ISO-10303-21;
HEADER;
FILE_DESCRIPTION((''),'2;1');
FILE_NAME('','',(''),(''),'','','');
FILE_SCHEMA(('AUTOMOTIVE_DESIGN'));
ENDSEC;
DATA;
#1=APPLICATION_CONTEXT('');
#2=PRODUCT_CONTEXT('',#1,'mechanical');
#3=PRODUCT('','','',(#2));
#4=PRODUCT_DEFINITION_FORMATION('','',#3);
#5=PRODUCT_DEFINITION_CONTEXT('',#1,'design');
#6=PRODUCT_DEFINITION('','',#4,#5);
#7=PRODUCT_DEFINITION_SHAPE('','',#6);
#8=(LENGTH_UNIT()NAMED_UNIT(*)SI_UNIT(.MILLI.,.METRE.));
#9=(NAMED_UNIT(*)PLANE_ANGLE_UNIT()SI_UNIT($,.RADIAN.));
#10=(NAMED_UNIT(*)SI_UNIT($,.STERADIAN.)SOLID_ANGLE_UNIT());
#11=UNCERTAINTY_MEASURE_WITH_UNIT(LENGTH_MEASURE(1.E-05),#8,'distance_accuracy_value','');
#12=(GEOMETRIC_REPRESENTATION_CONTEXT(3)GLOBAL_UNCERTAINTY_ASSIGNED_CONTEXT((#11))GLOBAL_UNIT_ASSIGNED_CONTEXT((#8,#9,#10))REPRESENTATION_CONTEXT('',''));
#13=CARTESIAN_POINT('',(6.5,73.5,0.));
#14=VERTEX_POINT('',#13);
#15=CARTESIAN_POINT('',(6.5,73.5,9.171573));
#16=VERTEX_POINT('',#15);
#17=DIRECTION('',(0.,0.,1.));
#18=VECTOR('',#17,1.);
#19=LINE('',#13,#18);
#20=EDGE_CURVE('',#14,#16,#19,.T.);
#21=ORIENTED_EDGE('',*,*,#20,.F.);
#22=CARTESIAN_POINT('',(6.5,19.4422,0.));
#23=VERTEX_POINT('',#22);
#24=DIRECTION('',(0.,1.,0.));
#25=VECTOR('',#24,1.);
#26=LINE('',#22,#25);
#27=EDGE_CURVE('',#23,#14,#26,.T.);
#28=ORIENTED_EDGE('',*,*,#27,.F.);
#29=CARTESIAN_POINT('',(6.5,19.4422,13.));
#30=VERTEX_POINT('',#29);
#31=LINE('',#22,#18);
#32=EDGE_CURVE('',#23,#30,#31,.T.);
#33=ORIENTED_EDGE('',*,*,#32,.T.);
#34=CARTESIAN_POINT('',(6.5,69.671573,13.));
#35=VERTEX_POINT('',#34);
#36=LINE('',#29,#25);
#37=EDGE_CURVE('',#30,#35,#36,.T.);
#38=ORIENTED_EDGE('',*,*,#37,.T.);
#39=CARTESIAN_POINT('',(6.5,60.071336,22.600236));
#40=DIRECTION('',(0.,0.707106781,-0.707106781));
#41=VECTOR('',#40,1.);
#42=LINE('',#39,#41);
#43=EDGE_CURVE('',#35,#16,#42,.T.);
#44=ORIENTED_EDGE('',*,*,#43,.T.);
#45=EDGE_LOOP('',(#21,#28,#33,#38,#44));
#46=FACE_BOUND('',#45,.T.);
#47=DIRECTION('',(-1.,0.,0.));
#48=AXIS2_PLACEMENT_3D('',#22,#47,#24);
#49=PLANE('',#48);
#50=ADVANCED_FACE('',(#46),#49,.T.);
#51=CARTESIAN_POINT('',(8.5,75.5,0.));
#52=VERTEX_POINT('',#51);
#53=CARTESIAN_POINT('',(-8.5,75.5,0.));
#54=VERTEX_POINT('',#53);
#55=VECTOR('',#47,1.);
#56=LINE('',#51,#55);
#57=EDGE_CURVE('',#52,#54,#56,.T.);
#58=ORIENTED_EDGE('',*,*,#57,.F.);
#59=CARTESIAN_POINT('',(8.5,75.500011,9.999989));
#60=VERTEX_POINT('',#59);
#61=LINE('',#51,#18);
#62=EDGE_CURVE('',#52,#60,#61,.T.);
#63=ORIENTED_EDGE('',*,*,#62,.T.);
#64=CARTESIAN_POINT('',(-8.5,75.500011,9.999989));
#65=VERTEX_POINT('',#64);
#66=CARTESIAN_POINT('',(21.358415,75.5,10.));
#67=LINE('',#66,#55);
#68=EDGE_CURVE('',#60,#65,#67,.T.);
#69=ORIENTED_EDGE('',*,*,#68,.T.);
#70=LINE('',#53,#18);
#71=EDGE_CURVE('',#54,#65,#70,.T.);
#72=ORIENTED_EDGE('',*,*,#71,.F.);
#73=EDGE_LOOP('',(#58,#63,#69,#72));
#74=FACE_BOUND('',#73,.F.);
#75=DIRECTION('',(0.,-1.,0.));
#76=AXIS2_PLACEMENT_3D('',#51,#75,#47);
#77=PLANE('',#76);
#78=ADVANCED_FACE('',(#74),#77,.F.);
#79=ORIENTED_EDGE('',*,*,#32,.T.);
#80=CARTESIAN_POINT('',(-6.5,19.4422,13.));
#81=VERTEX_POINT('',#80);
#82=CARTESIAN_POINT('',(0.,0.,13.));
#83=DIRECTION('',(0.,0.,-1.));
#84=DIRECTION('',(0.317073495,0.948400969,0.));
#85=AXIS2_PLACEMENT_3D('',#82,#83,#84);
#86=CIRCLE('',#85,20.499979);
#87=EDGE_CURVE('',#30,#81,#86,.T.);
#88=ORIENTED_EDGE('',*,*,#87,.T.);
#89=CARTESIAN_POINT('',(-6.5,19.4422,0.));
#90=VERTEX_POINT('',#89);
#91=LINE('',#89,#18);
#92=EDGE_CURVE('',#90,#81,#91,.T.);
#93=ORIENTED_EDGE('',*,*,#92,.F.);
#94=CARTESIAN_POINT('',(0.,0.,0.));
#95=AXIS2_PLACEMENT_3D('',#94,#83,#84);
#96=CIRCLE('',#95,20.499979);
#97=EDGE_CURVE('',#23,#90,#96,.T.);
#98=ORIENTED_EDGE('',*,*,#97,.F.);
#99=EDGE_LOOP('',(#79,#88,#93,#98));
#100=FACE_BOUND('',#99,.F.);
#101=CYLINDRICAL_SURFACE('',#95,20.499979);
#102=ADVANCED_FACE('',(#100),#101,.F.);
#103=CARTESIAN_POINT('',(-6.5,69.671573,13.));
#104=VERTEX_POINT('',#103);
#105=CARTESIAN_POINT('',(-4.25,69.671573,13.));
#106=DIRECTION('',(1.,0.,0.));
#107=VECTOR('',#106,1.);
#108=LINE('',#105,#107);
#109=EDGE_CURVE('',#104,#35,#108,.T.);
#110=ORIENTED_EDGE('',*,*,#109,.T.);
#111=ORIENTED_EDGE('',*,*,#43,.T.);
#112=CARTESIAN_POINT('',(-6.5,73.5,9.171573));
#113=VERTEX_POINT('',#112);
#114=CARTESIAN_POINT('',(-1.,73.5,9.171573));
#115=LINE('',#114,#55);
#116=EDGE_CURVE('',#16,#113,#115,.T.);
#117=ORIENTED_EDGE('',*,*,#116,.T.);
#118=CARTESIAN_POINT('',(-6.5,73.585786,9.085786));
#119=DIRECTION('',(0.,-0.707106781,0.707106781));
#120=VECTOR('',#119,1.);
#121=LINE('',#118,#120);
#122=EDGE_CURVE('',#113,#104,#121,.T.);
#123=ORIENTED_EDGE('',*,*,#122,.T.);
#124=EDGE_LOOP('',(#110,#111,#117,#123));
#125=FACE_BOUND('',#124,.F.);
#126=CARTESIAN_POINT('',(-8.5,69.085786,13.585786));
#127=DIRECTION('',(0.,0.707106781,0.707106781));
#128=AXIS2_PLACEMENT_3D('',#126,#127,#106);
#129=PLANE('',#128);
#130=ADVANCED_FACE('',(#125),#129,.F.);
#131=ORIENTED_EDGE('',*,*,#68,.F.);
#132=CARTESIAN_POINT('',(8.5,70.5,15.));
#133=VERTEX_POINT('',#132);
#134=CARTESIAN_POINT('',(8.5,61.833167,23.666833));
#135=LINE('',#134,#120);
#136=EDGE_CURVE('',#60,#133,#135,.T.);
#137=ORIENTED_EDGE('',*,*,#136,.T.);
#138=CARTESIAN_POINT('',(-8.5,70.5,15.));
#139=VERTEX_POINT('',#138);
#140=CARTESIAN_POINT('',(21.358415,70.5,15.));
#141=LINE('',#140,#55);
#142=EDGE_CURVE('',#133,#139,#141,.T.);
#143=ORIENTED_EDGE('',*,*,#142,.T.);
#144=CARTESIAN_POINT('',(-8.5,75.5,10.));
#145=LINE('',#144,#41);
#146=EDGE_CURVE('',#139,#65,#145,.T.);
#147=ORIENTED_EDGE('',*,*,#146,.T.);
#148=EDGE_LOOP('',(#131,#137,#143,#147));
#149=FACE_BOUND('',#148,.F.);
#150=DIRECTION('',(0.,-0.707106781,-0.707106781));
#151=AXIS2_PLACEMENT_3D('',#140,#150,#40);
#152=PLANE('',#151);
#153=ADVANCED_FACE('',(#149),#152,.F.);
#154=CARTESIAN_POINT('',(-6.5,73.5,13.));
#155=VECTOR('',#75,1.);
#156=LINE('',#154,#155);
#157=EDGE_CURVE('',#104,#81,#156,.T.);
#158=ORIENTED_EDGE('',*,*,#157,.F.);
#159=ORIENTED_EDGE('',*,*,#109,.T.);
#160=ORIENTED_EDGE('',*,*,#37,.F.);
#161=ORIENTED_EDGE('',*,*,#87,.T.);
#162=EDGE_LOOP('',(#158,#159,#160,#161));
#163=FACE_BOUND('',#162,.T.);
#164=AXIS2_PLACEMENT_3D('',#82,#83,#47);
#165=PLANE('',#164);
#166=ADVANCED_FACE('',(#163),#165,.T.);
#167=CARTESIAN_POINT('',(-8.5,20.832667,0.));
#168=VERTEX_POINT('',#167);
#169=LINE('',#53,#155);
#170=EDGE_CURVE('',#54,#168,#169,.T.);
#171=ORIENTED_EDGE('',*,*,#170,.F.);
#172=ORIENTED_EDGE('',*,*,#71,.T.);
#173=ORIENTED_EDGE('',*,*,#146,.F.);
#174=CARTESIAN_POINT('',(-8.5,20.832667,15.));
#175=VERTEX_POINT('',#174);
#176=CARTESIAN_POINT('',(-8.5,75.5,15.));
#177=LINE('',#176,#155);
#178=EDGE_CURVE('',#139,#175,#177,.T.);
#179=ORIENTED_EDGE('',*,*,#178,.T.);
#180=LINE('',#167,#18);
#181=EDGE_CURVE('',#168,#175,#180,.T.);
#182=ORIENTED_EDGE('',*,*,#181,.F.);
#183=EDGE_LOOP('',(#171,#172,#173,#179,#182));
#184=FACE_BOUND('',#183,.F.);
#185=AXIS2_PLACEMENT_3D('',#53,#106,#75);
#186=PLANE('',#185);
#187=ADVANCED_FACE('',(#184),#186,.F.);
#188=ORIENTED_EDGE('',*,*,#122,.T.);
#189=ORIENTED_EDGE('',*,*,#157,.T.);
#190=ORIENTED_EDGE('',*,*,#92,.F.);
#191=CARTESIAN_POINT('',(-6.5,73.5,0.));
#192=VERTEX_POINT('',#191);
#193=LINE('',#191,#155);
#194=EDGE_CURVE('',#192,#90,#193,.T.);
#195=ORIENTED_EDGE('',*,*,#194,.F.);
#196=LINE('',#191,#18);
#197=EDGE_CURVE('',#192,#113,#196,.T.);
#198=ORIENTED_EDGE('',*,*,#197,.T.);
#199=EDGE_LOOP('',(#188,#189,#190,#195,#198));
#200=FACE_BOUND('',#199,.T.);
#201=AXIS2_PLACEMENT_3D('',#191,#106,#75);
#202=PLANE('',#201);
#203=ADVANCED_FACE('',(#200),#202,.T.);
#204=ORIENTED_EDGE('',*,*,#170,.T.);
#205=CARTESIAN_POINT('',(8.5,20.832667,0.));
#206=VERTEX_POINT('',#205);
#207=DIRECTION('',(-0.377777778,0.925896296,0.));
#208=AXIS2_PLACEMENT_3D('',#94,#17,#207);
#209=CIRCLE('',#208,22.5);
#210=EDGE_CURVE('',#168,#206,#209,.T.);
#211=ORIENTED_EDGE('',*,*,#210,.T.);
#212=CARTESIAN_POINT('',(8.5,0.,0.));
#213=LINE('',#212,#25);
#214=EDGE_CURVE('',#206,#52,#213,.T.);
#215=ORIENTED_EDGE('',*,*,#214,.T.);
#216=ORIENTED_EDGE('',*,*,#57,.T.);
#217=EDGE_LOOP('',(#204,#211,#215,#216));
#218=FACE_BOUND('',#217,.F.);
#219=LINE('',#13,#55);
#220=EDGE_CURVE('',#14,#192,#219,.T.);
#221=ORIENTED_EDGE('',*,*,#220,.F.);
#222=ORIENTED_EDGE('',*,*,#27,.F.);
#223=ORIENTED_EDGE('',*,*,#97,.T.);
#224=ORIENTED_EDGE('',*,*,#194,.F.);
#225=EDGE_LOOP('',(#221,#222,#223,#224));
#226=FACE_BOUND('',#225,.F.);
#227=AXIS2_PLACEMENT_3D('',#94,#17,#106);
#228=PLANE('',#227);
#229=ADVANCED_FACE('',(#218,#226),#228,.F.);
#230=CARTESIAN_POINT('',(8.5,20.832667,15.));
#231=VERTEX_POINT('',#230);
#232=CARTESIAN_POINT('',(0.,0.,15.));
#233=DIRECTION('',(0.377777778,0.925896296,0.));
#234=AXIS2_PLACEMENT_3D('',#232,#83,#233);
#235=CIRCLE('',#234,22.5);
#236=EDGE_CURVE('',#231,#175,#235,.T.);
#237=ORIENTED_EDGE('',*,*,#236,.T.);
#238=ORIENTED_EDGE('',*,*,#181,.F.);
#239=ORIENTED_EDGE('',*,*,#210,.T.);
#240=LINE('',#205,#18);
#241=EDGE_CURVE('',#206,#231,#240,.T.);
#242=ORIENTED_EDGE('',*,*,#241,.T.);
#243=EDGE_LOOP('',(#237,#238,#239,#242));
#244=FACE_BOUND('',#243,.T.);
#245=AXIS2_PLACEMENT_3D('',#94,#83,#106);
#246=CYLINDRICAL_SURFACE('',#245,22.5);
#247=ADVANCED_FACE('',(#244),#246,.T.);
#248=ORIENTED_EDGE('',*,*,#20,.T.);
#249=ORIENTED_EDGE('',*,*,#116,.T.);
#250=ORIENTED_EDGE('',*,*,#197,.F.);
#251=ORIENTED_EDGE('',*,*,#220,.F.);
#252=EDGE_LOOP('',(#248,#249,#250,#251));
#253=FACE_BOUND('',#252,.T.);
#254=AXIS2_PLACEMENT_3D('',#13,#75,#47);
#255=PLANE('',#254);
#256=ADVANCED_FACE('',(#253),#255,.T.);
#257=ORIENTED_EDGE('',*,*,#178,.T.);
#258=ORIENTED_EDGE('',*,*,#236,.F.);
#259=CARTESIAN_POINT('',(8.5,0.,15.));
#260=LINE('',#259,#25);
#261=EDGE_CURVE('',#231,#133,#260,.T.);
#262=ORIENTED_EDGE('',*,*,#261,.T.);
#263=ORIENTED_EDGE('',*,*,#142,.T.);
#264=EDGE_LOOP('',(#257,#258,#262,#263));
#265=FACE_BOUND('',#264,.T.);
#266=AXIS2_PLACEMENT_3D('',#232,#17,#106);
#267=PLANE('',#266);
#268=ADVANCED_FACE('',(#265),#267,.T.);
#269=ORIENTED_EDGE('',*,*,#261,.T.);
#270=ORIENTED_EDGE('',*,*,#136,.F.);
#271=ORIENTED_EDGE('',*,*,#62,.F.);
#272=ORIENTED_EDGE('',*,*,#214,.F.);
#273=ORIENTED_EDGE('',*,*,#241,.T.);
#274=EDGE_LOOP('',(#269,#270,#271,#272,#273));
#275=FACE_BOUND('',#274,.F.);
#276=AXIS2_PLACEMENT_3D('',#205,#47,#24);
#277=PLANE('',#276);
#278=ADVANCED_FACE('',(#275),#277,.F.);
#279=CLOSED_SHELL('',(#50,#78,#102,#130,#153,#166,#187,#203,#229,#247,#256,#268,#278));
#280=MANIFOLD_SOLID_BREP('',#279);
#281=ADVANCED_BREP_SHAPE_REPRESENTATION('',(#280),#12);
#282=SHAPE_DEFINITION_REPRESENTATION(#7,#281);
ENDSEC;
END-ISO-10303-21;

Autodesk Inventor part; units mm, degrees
ref_plane "YZ Plane" through (0, 0, 0) normal (1, 0, 0) x (0, 1, 0)
ref_plane "XZ Plane" through (0, 0, 0) normal (0, 1, 0) x (-1, 0, 0)
ref_plane "XY Plane" through (0, 0, 0) normal (0, 0, 1) x (1, 0, 0)
sketch "Sketch3" plane through (0, 0, 0) normal (0, 0, 1) x (1, 0, 0)
  circle A0 centre (0, 0) radius 22.5
  line L0 (-8.5, 0) -> (8.5, 0)
  line L1 (8.5, 0) -> (8.5, 75.5)
  line L2 (8.5, 75.5) -> (-8.5, 75.5)
  line L3 (-8.5, 75.5) -> (-8.5, 0)
  dimension "d5" = 45
  dimension "d6" = 75.5
  dimension "d7" = 17
extrude "Extrusion3" add sketch "Sketch3" along normal blind 15
sketch "Sketch4" plane through (0, 0, 0) normal (0, 0, -1) x (-1, 0, 0)
  arc A0 (-8.5, 20.8327) -> (8.5, 20.8327) centre (0, 0) ccw projected
  line L0 (8.5, 75.5) -> (8.5, 20.8327) projected
  line L1 (-8.5, 75.5) -> (8.5, 75.5) projected
  line L2 (-8.5, 20.8327) -> (-8.5, 75.5) projected
  arc A1 (-6.5, 19.4422) -> (6.5, 19.4422) centre (0, 0) ccw
  line L3 (-6.5, 19.4422) -> (-6.5, 73.5)
  line L4 (-6.5, 73.5) -> (6.5, 73.5)
  line L5 (6.5, 73.5) -> (6.5, 19.4422)
  dimension "d10" = 2
extrude "Extrusion4" cut sketch "Sketch4" against normal blind 13 contours L3 L4 L5 A1
chamfer "Chamfer1" distance 5 angle 45 1 edges at (0, 75.5, 15)
sketch "Sketch6" plane through (-8.5, 70.5, 15) normal (0, 0.7071068, 0.7071068) x (1, 0, 0)
  line L0 (2, 2.8284) -> (2, 4.2426) projected
  line L1 (2, 4.2426) -> (15, 4.2426) projected
  line L2 (15, 4.2426) -> (15, 2.8284) projected
  line L3 (15, 2.8284) -> (2, 2.8284) projected
  line L4 (0, 7.0711) -> (0, 0) projected
  line L5 (0, 0) -> (17, 0) projected
  line L6 (17, 0) -> (17, 7.0711) projected
  line L7 (17, 7.0711) -> (0, 7.0711) projected
  point P0 (8.5, -39.2444)
extrude "Extrusion5" add sketch "Sketch6" against normal blind 2 contours L0 L1 L2 L3 | L7 L6 L5 L4
properties part number "TARM10" material "ABS Plastic"
